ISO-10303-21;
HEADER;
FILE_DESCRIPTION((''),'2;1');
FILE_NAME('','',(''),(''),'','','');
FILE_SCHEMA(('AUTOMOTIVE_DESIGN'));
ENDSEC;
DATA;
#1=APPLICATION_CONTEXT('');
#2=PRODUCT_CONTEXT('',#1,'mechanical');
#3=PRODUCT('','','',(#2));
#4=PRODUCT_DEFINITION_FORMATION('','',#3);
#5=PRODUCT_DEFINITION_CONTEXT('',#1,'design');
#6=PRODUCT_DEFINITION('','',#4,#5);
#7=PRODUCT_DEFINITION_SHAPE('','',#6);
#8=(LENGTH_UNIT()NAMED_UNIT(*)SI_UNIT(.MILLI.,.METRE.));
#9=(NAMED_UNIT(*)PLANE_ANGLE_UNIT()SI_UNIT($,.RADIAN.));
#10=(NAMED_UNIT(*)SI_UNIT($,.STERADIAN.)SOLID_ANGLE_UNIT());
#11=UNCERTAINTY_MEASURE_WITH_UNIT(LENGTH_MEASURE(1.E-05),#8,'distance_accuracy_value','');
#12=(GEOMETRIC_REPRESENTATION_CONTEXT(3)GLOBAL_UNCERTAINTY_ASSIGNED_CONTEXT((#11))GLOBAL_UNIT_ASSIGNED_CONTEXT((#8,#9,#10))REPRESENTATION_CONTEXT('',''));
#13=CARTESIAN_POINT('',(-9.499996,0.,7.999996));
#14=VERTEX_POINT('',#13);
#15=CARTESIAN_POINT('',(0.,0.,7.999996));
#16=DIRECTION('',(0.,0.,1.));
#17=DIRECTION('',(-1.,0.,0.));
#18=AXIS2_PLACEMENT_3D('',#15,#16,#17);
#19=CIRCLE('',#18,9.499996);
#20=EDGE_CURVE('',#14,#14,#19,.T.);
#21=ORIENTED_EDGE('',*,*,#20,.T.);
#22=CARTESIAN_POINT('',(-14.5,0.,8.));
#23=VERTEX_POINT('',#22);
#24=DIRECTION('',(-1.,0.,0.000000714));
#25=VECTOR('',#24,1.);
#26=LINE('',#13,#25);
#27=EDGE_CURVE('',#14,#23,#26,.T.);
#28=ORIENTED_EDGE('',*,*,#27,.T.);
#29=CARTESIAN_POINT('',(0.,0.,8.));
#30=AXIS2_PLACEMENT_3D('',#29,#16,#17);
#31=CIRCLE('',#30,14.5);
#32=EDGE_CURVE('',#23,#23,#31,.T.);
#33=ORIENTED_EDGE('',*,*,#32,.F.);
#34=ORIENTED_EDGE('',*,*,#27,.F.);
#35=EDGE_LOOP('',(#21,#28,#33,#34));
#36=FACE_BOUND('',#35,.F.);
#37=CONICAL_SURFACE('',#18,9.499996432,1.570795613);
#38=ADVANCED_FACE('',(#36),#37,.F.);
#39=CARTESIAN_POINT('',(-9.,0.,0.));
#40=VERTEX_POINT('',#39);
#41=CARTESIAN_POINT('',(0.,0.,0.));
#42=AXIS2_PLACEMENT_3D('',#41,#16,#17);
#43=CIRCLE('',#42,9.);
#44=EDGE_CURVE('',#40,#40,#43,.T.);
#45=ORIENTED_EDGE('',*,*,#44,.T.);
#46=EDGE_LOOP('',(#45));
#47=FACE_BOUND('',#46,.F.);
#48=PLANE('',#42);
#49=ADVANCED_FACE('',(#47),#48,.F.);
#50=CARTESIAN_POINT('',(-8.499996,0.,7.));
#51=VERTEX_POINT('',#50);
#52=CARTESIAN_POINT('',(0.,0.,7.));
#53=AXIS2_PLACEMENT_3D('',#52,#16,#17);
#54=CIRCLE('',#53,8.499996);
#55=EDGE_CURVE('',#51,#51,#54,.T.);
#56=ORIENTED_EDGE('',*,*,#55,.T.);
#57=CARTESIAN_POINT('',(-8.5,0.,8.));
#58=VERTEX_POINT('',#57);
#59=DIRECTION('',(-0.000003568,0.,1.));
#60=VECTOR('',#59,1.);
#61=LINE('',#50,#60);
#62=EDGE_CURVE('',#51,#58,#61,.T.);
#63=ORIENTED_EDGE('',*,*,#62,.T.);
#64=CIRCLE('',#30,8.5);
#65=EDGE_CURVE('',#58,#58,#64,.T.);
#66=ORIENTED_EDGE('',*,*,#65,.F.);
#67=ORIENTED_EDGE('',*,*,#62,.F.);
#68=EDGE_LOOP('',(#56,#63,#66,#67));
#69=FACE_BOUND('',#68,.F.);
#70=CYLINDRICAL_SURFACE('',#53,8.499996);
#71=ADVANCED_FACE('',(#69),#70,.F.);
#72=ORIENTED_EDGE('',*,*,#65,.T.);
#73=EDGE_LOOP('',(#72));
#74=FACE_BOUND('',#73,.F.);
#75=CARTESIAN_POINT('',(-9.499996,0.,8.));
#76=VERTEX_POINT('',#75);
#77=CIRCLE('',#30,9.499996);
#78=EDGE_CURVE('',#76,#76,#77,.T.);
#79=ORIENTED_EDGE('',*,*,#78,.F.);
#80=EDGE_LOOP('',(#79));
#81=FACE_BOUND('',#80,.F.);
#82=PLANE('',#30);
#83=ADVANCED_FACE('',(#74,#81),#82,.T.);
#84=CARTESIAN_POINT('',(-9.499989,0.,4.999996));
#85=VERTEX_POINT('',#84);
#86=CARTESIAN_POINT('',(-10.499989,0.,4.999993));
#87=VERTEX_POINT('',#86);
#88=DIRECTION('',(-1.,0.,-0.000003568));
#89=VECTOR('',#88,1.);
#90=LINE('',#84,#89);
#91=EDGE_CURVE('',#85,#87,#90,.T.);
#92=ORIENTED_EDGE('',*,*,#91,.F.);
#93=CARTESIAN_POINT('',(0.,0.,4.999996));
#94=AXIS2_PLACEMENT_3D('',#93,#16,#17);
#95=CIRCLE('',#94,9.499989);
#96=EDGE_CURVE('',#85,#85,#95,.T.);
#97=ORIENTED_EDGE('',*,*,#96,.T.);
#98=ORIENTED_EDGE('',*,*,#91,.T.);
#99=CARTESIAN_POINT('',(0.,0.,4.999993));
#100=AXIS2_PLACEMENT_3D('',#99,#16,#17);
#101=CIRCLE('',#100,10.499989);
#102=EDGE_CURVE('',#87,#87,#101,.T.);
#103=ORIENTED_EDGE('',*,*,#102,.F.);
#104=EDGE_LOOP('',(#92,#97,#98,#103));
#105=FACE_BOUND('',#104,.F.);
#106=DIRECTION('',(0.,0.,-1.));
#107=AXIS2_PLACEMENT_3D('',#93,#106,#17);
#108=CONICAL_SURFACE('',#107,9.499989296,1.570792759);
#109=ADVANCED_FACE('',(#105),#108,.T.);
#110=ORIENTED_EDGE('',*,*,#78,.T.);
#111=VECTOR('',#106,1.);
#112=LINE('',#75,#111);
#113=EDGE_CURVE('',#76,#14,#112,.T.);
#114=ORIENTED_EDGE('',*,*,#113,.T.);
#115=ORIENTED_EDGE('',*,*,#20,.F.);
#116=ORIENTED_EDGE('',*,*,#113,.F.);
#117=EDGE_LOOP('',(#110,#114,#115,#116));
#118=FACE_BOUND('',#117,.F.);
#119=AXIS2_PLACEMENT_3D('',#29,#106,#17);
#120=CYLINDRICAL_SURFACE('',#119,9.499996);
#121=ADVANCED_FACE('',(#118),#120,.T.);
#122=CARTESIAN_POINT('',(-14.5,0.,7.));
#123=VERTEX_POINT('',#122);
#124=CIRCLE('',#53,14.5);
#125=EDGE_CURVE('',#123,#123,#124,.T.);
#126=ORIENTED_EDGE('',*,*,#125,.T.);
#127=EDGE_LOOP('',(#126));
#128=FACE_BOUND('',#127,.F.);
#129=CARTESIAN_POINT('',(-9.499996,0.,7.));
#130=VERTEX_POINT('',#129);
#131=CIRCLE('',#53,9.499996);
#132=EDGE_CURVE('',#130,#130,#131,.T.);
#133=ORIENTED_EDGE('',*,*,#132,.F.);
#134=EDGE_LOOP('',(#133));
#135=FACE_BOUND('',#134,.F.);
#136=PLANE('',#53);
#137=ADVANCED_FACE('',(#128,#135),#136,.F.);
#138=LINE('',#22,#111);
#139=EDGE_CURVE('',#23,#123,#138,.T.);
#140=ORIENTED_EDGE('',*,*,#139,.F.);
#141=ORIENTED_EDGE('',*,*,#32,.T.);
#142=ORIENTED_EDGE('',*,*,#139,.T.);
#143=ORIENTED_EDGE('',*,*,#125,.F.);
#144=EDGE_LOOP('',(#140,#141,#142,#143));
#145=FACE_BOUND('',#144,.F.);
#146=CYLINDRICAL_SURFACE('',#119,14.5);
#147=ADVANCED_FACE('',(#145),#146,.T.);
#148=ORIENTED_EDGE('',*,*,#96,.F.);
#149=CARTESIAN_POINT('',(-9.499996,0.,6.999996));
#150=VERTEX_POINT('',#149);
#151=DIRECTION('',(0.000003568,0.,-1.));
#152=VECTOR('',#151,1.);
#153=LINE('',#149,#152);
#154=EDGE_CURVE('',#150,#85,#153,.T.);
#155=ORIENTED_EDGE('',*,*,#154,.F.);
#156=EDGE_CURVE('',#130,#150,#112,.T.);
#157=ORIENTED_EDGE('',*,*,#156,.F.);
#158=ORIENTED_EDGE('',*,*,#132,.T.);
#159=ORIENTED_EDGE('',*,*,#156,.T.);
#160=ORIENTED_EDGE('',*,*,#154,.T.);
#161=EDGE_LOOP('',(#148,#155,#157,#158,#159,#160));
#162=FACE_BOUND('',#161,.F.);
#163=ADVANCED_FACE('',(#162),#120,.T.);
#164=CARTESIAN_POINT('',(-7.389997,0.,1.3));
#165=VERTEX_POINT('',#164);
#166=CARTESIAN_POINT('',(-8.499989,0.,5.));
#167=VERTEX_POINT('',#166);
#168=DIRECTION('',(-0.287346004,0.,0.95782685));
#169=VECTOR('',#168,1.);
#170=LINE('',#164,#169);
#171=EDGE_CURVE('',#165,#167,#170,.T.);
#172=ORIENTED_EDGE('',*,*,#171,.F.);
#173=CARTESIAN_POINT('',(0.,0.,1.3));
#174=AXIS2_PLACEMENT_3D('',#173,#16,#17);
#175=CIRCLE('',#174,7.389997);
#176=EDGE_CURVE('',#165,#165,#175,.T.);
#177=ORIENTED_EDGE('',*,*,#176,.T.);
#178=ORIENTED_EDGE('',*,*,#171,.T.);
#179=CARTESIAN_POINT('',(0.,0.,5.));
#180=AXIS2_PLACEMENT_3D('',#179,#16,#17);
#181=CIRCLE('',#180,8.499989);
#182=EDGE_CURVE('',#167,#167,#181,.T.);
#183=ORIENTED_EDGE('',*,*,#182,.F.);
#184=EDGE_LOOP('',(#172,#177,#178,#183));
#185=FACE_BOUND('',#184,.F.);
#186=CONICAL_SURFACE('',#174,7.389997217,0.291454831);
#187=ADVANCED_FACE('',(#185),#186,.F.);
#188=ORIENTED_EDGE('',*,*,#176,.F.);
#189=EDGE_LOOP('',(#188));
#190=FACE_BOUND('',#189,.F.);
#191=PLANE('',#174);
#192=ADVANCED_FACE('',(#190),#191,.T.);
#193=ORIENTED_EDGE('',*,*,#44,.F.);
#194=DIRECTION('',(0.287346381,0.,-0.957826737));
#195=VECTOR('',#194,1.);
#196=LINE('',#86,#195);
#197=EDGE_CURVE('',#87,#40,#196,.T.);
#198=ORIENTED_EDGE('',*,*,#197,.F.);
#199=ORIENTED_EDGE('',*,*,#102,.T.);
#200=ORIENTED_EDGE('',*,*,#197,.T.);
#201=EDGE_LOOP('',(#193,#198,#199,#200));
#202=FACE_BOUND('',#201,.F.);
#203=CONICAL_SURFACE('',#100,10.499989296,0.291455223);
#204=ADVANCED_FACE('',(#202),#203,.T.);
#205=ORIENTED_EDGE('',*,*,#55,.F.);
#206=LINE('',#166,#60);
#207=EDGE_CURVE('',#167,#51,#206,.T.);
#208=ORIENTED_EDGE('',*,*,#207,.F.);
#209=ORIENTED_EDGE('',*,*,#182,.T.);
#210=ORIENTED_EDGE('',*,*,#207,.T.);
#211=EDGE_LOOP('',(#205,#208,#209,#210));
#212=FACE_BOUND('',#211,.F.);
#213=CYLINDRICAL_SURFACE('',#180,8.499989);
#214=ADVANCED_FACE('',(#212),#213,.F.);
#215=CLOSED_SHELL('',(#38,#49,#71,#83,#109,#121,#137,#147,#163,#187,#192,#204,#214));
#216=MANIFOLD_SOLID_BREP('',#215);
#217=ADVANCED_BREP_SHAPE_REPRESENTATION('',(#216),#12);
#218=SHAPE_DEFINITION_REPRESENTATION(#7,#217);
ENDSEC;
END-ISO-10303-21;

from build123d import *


# Not quite as in the source:
# - ends of sketch curves that miss each other by under 0.0002 mm in the source are joined


with BuildPart() as f1:
    # F0 (on Front) → F1 (revolve)
    with BuildSketch(Plane.XZ):
        Polygon((-7, 0), (0, 0), (0, 1.3), (-7.3899972171, 1.3), align=None)
        Polygon((-9, 0), (-7, 0), (-7.3899972171, 1.3), (-9, 1.3), align=None)
        Polygon((-10.4999892964, 4.9999928643), (-9, 0), (-9, 1.3), (-7.3899972171, 1.3), (-8.4999892965, 5), (-9.4999892964, 4.9999964322), align=None)
        Polygon((-9.4999892964, 4.9999964322), (-8.4999892965, 5), (-8.4999964322, 7), (-9.4999964321, 6.9999964322), align=None)
        Polygon((-9.4999964321, 6.9999964322), (-8.4999964322, 7), (-8.5, 8), (-9.4999964321, 8), align=None)
        Polygon((-14.5, 7), (-9.4999964321, 7), (-9.4999964321, 7.9999964322), (-14.5, 8), align=None)
    revolve(axis=Axis((0, 0, 0.65), (0, 0, 1)))


solid = f1.part
